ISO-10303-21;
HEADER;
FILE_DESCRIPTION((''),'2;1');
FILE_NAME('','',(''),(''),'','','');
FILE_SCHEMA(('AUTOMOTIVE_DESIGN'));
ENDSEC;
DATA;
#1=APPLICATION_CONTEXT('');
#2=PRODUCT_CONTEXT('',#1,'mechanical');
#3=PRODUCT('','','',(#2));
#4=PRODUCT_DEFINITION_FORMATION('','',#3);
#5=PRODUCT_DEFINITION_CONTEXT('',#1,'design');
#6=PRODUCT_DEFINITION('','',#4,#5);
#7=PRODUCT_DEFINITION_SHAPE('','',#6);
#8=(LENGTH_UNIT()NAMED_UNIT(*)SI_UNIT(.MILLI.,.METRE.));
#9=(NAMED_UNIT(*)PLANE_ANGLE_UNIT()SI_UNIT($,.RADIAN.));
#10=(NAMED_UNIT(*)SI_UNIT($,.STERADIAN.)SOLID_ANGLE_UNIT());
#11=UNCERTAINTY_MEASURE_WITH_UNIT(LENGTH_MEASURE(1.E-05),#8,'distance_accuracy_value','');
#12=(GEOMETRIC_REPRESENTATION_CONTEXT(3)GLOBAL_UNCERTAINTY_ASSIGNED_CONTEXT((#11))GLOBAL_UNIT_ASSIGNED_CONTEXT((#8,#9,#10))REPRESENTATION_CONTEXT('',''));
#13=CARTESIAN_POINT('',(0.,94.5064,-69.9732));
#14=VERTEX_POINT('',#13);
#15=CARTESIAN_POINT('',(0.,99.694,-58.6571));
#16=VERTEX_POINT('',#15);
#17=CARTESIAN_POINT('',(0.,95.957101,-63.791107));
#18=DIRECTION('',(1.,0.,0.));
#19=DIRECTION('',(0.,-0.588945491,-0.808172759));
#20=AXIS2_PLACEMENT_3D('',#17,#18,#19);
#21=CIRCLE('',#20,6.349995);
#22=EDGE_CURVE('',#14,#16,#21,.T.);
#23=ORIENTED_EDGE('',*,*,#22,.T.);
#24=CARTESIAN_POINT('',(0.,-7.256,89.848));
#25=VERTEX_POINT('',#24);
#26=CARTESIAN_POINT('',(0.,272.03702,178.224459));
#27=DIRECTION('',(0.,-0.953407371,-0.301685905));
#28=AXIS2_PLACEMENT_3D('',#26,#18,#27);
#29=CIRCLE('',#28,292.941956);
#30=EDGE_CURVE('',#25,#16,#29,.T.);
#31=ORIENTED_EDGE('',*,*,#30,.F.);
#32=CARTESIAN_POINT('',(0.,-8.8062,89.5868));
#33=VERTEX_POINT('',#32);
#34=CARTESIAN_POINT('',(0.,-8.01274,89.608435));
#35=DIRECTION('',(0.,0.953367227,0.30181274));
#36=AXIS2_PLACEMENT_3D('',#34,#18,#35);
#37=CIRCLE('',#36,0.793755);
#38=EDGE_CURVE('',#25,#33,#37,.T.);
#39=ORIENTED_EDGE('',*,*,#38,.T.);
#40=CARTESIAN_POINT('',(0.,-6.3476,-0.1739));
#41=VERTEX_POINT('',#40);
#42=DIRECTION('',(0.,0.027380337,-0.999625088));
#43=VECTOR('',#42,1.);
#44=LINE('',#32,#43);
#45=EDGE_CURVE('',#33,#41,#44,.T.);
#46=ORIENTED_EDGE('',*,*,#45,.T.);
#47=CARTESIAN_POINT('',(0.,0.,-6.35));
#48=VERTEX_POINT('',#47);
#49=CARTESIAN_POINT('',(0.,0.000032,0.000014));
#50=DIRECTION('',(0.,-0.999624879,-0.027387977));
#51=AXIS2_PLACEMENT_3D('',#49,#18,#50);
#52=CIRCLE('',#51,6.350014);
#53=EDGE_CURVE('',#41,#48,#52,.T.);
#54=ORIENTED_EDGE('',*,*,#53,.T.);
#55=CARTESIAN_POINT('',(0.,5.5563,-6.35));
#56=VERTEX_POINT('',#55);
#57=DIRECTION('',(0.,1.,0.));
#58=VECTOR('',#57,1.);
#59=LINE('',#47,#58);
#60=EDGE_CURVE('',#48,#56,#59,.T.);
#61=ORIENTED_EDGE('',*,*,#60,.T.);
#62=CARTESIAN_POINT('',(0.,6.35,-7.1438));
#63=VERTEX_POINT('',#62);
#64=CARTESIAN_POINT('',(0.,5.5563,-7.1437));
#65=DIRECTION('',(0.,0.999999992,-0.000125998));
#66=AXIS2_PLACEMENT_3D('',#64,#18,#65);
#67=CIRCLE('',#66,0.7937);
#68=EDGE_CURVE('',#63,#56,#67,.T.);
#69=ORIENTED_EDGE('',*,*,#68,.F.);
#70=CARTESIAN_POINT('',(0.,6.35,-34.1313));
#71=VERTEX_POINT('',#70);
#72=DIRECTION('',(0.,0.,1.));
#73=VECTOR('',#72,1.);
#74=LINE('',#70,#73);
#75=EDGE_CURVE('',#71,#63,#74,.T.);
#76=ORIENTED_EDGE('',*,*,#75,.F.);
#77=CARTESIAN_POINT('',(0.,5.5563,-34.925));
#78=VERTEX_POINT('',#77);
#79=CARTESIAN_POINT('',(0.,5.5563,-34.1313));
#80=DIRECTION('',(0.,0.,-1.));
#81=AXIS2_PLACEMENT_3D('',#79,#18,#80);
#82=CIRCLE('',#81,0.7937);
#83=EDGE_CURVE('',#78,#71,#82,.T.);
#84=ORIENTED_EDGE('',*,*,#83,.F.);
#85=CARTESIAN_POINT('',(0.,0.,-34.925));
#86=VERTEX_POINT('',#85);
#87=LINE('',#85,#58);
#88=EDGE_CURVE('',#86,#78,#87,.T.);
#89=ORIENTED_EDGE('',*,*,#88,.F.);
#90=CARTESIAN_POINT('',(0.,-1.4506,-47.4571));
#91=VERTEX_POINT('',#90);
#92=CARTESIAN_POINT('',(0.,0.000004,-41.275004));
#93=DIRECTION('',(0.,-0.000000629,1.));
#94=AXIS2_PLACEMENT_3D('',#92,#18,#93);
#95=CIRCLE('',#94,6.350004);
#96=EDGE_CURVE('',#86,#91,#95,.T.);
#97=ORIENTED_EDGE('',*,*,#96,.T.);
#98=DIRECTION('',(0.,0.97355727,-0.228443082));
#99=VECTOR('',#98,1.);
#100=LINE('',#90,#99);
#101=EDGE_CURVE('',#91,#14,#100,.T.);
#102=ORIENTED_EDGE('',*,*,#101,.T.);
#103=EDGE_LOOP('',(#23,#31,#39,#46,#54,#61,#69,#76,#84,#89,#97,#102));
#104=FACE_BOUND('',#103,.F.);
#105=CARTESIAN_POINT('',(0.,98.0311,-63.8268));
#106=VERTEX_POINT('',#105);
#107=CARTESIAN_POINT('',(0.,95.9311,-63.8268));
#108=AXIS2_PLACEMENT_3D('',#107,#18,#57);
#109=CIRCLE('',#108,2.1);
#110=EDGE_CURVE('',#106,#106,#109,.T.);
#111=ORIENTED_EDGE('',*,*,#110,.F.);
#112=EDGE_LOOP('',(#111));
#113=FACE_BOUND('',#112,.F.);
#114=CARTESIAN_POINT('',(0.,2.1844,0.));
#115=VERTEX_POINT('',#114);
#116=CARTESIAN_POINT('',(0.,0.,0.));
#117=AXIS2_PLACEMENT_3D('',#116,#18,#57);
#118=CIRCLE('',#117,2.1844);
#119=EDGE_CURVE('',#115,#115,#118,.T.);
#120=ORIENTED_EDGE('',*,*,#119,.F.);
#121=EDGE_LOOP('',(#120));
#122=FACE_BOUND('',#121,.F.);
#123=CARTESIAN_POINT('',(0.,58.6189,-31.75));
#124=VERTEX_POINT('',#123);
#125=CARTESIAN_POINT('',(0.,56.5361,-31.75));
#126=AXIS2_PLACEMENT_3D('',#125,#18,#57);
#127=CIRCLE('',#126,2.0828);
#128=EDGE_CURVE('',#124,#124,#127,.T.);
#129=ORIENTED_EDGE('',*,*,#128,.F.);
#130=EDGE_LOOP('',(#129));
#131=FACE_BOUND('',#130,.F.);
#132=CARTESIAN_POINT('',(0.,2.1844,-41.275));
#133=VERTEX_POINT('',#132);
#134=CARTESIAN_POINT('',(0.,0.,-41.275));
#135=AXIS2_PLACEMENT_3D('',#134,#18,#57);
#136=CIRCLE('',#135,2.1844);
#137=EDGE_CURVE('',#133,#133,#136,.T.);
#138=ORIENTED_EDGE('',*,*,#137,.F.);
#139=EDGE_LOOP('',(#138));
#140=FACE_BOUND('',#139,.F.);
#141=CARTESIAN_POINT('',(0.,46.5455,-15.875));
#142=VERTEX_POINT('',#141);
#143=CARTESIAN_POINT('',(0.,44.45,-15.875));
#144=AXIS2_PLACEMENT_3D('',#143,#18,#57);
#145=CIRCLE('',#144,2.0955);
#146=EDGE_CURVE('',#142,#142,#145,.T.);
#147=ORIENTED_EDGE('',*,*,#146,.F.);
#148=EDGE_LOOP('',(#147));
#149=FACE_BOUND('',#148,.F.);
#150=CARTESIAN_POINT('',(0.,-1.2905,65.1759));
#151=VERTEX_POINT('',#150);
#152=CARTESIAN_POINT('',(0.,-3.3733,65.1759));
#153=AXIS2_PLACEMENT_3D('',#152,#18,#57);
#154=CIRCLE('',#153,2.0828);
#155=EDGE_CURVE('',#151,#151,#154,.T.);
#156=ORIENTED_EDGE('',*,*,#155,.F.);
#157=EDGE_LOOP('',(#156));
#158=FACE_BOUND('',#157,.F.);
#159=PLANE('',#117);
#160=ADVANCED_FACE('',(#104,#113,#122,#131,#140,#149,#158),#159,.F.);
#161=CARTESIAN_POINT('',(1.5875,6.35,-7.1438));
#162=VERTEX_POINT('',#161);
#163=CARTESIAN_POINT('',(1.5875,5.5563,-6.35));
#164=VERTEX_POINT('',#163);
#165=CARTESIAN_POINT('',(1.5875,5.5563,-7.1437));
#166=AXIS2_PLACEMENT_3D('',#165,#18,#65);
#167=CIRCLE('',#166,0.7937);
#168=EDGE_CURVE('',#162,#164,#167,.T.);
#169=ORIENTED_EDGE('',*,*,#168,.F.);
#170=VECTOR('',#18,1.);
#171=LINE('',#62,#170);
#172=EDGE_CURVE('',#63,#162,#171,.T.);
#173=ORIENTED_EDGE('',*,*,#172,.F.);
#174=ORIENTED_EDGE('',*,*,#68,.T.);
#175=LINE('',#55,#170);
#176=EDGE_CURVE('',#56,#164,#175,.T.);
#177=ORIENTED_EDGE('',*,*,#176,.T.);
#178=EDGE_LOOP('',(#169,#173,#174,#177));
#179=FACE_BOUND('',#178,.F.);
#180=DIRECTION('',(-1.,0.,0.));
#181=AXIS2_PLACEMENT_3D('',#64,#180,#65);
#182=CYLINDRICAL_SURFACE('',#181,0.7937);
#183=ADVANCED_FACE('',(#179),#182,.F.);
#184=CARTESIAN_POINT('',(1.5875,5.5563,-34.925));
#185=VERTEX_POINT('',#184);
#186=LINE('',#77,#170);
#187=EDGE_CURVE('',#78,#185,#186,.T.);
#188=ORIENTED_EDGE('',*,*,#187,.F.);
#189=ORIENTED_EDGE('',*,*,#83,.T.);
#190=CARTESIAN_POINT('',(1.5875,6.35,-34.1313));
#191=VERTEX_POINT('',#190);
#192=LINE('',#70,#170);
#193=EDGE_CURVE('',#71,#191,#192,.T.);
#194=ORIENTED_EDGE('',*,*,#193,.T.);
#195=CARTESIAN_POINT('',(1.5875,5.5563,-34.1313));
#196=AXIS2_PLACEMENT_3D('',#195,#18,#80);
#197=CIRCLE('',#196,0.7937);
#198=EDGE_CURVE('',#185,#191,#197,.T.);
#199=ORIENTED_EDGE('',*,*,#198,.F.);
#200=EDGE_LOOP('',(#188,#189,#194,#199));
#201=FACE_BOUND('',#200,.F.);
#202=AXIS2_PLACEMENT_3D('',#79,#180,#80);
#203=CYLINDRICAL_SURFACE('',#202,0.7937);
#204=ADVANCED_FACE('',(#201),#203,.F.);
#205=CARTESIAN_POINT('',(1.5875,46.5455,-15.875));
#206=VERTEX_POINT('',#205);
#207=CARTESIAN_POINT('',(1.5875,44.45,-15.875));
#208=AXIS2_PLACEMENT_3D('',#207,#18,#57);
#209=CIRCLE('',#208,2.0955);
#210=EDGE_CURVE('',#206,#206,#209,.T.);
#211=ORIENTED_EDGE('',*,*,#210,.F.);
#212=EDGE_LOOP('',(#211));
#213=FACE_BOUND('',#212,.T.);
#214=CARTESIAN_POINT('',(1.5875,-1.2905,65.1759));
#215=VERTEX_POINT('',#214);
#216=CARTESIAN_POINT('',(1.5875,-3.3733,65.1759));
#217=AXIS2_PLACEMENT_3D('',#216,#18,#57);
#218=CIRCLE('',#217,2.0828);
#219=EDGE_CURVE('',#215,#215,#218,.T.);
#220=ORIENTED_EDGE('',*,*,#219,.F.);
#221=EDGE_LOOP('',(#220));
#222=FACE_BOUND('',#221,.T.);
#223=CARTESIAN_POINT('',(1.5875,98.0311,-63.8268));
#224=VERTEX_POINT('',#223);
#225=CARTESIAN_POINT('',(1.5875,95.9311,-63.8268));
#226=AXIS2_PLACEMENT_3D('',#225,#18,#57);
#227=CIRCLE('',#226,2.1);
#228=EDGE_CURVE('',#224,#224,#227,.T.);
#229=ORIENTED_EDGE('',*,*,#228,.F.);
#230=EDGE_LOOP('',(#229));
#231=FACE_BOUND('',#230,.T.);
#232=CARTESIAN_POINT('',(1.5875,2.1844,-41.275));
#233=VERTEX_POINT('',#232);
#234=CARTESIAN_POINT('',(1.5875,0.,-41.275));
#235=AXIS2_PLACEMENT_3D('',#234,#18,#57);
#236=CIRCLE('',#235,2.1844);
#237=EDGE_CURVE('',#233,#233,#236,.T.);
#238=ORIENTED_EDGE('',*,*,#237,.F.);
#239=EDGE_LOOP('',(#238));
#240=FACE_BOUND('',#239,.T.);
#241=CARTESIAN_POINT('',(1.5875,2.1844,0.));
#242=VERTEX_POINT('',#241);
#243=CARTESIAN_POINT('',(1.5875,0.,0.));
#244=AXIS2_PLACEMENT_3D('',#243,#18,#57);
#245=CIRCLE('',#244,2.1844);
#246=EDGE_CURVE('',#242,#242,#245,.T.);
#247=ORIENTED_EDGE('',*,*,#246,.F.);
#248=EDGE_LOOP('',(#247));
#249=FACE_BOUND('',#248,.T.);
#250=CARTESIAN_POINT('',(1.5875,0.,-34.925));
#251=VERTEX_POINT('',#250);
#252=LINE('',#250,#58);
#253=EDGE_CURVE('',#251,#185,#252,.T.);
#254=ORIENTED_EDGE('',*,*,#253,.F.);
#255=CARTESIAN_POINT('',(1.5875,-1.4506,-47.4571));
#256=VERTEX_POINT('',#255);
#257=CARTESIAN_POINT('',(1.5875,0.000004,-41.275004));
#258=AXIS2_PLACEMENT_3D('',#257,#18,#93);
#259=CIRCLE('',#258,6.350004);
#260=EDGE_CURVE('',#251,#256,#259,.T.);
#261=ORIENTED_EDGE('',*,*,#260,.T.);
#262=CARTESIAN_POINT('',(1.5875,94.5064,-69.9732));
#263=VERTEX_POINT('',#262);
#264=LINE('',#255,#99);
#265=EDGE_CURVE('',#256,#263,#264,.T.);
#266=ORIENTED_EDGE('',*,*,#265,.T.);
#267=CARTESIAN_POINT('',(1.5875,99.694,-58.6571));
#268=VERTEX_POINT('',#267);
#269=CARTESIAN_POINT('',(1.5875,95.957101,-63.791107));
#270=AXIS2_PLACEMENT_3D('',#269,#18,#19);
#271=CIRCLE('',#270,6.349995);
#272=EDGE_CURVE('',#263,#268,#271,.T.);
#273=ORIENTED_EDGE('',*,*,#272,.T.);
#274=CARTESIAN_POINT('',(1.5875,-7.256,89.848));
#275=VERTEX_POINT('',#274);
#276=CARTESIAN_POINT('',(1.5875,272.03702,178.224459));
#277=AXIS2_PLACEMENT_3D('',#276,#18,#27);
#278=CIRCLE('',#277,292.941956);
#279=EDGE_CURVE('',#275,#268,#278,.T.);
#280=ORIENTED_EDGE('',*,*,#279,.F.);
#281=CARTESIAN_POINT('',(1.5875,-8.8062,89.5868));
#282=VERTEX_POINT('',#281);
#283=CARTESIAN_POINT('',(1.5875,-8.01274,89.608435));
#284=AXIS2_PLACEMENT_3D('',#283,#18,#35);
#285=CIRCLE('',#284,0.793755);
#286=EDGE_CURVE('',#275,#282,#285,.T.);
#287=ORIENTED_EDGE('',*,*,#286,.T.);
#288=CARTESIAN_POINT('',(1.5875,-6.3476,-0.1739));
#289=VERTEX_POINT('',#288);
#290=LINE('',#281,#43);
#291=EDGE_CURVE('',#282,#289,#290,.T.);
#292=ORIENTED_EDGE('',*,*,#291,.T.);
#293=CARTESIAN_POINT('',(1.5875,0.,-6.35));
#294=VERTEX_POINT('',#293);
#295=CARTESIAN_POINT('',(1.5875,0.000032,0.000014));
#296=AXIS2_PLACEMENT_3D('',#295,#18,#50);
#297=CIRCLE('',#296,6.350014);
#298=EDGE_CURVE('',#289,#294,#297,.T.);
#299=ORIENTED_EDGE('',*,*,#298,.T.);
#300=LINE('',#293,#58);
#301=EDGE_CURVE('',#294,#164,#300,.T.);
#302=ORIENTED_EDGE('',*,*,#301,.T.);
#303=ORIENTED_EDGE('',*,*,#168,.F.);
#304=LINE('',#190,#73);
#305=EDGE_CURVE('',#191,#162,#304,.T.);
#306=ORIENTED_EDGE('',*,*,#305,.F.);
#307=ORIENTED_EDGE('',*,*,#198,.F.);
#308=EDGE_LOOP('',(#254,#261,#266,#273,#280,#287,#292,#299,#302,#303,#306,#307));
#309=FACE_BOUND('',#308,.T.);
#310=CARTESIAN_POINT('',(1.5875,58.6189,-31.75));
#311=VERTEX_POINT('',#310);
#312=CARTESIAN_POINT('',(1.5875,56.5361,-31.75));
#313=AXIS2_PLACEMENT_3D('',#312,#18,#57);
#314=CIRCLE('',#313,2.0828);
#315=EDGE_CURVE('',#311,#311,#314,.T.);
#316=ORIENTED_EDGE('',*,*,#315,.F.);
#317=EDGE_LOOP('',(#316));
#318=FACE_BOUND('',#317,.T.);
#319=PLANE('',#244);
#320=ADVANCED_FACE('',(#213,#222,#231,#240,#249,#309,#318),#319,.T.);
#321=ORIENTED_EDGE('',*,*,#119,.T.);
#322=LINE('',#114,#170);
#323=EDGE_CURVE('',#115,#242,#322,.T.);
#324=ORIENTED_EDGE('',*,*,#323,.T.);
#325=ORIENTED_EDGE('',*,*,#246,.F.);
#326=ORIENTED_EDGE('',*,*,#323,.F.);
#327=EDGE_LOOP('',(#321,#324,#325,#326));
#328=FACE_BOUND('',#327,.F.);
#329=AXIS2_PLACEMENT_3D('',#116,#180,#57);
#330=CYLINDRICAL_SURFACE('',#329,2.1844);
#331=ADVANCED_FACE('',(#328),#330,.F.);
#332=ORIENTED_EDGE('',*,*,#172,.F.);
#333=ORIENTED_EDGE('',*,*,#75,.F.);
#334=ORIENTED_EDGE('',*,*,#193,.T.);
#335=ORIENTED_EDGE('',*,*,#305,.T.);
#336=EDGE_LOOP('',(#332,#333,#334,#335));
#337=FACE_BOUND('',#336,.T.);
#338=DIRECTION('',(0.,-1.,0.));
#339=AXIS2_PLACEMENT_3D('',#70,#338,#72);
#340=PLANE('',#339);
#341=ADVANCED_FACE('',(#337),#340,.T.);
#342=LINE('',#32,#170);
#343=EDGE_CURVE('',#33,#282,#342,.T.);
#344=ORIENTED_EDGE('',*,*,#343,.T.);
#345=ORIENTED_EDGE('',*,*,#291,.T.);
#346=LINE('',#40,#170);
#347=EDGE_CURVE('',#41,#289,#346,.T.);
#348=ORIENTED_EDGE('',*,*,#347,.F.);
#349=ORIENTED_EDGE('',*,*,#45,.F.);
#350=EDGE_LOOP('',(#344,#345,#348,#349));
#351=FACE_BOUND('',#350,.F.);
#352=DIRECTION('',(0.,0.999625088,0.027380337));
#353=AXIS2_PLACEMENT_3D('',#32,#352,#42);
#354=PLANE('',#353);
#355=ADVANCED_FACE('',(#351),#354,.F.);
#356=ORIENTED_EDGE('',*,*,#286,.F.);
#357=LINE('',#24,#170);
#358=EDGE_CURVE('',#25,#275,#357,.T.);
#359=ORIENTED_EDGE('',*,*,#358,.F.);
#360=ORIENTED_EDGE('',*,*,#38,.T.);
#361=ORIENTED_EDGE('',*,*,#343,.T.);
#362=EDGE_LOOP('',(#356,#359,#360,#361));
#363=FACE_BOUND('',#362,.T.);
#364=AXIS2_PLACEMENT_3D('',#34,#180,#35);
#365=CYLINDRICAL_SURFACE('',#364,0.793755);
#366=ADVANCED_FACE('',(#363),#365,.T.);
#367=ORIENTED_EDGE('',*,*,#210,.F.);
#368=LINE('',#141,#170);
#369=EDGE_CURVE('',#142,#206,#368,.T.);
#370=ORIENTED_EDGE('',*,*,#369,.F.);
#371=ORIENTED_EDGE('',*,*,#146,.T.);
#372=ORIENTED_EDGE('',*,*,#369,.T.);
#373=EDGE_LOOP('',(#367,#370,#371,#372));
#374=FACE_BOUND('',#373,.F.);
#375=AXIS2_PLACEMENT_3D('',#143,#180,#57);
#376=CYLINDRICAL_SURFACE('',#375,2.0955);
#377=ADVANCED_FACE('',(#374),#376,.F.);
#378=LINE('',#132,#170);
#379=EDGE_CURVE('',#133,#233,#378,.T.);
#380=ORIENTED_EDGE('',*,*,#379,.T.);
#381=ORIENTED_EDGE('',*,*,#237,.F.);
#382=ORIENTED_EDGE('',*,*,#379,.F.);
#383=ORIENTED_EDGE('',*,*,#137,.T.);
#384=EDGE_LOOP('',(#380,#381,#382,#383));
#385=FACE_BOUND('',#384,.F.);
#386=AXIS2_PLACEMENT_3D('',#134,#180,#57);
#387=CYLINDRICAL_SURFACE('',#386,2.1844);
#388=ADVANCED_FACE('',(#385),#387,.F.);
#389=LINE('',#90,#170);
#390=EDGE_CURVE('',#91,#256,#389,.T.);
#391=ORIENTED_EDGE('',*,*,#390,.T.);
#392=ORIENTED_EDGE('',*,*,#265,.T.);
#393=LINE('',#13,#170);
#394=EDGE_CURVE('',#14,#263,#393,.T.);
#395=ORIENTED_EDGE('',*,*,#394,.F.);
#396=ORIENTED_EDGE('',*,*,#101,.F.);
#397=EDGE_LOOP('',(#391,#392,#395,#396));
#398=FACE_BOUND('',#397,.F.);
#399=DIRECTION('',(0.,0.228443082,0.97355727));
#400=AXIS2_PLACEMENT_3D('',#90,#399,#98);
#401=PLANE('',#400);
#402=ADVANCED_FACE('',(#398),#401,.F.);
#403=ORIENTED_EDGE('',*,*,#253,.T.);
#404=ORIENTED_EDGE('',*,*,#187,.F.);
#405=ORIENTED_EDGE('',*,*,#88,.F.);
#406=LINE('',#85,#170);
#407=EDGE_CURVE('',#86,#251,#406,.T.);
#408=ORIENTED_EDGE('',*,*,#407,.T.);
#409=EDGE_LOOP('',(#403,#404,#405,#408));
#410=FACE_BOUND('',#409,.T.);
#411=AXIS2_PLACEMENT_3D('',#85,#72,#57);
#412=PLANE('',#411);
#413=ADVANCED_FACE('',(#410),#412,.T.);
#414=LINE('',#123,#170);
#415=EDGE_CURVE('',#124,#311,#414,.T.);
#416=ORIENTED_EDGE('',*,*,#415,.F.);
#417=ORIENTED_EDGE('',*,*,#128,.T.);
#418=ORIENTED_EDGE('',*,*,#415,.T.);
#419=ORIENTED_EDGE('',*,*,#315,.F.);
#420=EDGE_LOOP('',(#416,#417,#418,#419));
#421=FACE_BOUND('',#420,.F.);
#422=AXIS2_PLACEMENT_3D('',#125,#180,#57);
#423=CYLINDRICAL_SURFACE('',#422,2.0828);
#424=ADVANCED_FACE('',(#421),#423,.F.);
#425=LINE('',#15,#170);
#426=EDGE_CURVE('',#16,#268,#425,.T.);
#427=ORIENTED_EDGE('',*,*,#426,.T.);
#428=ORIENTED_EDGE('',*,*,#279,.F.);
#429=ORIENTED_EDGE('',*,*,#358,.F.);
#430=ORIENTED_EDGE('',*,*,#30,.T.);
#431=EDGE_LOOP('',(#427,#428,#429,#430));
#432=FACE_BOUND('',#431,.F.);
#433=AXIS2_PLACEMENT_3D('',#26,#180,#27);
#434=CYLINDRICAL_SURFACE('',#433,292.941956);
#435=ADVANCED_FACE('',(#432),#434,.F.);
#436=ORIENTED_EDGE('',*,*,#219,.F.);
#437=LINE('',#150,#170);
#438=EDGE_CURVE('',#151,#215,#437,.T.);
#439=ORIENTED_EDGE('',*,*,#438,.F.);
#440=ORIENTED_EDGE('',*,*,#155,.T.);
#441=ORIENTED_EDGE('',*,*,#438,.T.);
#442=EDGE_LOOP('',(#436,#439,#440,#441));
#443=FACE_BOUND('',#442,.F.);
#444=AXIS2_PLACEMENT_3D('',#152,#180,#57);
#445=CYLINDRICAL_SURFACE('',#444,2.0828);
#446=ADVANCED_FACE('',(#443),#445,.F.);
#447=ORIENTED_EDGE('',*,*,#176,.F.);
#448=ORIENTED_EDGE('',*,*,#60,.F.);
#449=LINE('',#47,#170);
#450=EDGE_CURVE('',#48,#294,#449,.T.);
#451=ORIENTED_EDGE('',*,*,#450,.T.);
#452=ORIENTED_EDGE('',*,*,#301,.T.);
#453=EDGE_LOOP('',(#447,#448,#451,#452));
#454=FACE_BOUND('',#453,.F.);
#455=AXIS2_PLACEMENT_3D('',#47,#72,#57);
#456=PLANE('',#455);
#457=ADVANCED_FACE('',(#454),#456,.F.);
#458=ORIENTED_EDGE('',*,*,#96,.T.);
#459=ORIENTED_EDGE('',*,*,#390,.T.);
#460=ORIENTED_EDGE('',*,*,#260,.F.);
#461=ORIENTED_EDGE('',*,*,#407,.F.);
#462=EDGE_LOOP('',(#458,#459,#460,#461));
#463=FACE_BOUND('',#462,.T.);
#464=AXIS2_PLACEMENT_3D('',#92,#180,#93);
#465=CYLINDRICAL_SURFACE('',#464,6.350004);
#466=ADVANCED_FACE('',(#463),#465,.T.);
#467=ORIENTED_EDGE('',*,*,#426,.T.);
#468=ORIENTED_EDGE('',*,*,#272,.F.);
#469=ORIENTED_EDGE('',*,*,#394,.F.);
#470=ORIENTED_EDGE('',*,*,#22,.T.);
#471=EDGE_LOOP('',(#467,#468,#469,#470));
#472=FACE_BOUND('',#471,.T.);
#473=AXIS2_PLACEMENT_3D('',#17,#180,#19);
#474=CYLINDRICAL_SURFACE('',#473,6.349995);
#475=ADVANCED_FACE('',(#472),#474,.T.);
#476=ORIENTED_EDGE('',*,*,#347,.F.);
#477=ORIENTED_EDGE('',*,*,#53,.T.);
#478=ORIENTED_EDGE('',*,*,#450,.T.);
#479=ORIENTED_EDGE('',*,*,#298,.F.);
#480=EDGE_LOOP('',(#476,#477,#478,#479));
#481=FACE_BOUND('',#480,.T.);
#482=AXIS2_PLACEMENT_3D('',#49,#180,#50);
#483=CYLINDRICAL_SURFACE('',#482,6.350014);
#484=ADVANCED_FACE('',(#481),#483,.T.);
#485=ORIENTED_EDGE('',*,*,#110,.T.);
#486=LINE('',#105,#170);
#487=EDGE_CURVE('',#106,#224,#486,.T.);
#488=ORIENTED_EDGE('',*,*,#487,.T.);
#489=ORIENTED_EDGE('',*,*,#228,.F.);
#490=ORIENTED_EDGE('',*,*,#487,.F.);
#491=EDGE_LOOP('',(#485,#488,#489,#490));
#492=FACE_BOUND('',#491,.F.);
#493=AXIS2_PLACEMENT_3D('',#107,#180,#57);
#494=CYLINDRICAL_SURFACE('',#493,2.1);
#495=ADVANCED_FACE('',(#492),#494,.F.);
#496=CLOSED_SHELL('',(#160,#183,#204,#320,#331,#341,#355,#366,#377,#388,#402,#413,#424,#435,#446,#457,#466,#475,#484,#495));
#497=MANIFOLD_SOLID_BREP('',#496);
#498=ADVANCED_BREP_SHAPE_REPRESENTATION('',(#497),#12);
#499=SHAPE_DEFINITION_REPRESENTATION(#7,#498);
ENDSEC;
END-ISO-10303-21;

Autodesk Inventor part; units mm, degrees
ref_plane "YZ Plane" through (0, 0, 0) normal (1, 0, 0) x (0, 1, 0)
ref_plane "XZ Plane" through (0, 0, 0) normal (0, 1, 0) x (-1, 0, 0)
ref_plane "XY Plane" through (0, 0, 0) normal (0, 0, 1) x (1, 0, 0)
sketch "main" plane through (0, 0, 0) normal (0, 0, 1) x (1, 0, 0)
  circle A0 centre (-191.7635, 49.9495) radius 2.1844
  circle A1 centre (-95.8324, -13.8772) radius 2.1
  arc A2 (-99.5462, -18.9735) -> (-92.0695, -8.7075) centre (-95.8064, -13.8415) ccw
  arc A3 (-198.1111, 49.7757) -> (-191.7635, 43.5995) centre (-191.7635, 49.9495) ccw
  line L0 (-200.5697, 139.5363) -> (-198.1111, 49.7757)
  arc A4 (-199.0195, 139.7975) -> (-92.0695, -8.7075) centre (80.274, 228.1743) ccw
  circle A5 centre (-195.1368, 115.1254) radius 2.0828
  line L1 (-191.7635, 43.5995) -> (-186.2072, 43.5995)
  arc A6 (-199.0195, 139.7975) -> (-200.5697, 139.5363) centre (-199.7762, 139.5581) ccw
  circle A7 centre (-135.2274, 18.1995) radius 2.0828
  circle A8 centre (-191.7635, 8.6745) radius 2.1844
  arc A9 (-191.7635, 15.0245) -> (-193.2141, 2.4924) centre (-191.7635, 8.6745) ccw
  line L2 (-185.4135, 15.8183) -> (-185.4135, 42.8058)
  line L3 (-191.7635, 15.0245) -> (-186.2072, 15.0245)
  arc A10 (-185.4135, 42.8058) -> (-186.2072, 43.5995) centre (-186.2072, 42.8058) ccw
  arc A11 (-186.2072, 15.0245) -> (-185.4135, 15.8183) centre (-186.2072, 15.8183) ccw
  line L4 (-193.2141, 2.4924) -> (-97.2571, -20.0236)
  point P0 (1.1251, 9.7944)
  point P1 (-200.7302, 145.398)
  dimension "d7" = 12.7
  dimension "d8" = 4.1656
  dimension "d9" = 6.35
  dimension "d11" = 0.7937
  dimension "d13" = 4.1656
  dimension "d15" = 12.7
  dimension "d16" = 0.7937
sketch "Sketch1" plane through (0, 0, 0) normal (1, 0, 0) x (0, 1, 0)
  circle A0 centre (44.45, -15.875) radius 2.0955
  circle A1 centre (0, 0) radius 2.1844
  circle A2 centre (95.9311, -63.8268) radius 2.1
  arc A3 (92.2173, -68.923) -> (99.694, -58.6571) centre (95.9571, -63.7911) ccw
  arc A4 (-6.3476, -0.1739) -> (0, -6.35) centre (0, 0) ccw
  line L0 (-8.8062, 89.5868) -> (-6.3476, -0.1739)
  arc A5 (-7.256, 89.848) -> (99.694, -58.6571) centre (272.0375, 178.2247) ccw
  circle A6 centre (-3.3733, 65.1759) radius 2.0828
  line L1 (0, -6.35) -> (5.5563, -6.35)
  arc A7 (-7.256, 89.848) -> (-8.8062, 89.5868) centre (-8.0127, 89.6085) ccw
  circle A8 centre (56.5361, -31.75) radius 2.0828
  circle A9 centre (0, -41.275) radius 2.1844
  arc A10 (0, -34.925) -> (-1.4506, -47.4571) centre (0, -41.275) ccw
  line L2 (6.35, -34.1313) -> (6.35, -7.1438)
  line L3 (0, -34.925) -> (5.5563, -34.925)
  arc A11 (6.35, -7.1438) -> (5.5563, -6.35) centre (5.5563, -7.1437) ccw
  arc A12 (5.5563, -34.925) -> (6.35, -34.1313) centre (5.5563, -34.1313) ccw
  line L4 (-1.4506, -47.4571) -> (94.5064, -69.9732)
  dimension "d18" = 4.191
extrude "Extrusion1" add sketch "Sketch1" along normal blind 1.5875
equation "\"BendRadius\" = Thickness"
equation "\"BendReliefWidth\" = Thickness"
equation "\"BendReliefDepth\" = 0.5 * Thickness"
equation "\"CornerReliefSize\" = 4 * Thickness"
equation "\"MinimumRemnant\" = 2 * Thickness"
equation "\"TransitionRadius\" = BendRadius"
equation "\"JacobiRadiusSize\" = BendRadius"
equation "\"GapSize\" = Thickness"
equation "\"Thickness\" = 1.5875"
properties part number "ramp" material "Acetal Resin, White"
